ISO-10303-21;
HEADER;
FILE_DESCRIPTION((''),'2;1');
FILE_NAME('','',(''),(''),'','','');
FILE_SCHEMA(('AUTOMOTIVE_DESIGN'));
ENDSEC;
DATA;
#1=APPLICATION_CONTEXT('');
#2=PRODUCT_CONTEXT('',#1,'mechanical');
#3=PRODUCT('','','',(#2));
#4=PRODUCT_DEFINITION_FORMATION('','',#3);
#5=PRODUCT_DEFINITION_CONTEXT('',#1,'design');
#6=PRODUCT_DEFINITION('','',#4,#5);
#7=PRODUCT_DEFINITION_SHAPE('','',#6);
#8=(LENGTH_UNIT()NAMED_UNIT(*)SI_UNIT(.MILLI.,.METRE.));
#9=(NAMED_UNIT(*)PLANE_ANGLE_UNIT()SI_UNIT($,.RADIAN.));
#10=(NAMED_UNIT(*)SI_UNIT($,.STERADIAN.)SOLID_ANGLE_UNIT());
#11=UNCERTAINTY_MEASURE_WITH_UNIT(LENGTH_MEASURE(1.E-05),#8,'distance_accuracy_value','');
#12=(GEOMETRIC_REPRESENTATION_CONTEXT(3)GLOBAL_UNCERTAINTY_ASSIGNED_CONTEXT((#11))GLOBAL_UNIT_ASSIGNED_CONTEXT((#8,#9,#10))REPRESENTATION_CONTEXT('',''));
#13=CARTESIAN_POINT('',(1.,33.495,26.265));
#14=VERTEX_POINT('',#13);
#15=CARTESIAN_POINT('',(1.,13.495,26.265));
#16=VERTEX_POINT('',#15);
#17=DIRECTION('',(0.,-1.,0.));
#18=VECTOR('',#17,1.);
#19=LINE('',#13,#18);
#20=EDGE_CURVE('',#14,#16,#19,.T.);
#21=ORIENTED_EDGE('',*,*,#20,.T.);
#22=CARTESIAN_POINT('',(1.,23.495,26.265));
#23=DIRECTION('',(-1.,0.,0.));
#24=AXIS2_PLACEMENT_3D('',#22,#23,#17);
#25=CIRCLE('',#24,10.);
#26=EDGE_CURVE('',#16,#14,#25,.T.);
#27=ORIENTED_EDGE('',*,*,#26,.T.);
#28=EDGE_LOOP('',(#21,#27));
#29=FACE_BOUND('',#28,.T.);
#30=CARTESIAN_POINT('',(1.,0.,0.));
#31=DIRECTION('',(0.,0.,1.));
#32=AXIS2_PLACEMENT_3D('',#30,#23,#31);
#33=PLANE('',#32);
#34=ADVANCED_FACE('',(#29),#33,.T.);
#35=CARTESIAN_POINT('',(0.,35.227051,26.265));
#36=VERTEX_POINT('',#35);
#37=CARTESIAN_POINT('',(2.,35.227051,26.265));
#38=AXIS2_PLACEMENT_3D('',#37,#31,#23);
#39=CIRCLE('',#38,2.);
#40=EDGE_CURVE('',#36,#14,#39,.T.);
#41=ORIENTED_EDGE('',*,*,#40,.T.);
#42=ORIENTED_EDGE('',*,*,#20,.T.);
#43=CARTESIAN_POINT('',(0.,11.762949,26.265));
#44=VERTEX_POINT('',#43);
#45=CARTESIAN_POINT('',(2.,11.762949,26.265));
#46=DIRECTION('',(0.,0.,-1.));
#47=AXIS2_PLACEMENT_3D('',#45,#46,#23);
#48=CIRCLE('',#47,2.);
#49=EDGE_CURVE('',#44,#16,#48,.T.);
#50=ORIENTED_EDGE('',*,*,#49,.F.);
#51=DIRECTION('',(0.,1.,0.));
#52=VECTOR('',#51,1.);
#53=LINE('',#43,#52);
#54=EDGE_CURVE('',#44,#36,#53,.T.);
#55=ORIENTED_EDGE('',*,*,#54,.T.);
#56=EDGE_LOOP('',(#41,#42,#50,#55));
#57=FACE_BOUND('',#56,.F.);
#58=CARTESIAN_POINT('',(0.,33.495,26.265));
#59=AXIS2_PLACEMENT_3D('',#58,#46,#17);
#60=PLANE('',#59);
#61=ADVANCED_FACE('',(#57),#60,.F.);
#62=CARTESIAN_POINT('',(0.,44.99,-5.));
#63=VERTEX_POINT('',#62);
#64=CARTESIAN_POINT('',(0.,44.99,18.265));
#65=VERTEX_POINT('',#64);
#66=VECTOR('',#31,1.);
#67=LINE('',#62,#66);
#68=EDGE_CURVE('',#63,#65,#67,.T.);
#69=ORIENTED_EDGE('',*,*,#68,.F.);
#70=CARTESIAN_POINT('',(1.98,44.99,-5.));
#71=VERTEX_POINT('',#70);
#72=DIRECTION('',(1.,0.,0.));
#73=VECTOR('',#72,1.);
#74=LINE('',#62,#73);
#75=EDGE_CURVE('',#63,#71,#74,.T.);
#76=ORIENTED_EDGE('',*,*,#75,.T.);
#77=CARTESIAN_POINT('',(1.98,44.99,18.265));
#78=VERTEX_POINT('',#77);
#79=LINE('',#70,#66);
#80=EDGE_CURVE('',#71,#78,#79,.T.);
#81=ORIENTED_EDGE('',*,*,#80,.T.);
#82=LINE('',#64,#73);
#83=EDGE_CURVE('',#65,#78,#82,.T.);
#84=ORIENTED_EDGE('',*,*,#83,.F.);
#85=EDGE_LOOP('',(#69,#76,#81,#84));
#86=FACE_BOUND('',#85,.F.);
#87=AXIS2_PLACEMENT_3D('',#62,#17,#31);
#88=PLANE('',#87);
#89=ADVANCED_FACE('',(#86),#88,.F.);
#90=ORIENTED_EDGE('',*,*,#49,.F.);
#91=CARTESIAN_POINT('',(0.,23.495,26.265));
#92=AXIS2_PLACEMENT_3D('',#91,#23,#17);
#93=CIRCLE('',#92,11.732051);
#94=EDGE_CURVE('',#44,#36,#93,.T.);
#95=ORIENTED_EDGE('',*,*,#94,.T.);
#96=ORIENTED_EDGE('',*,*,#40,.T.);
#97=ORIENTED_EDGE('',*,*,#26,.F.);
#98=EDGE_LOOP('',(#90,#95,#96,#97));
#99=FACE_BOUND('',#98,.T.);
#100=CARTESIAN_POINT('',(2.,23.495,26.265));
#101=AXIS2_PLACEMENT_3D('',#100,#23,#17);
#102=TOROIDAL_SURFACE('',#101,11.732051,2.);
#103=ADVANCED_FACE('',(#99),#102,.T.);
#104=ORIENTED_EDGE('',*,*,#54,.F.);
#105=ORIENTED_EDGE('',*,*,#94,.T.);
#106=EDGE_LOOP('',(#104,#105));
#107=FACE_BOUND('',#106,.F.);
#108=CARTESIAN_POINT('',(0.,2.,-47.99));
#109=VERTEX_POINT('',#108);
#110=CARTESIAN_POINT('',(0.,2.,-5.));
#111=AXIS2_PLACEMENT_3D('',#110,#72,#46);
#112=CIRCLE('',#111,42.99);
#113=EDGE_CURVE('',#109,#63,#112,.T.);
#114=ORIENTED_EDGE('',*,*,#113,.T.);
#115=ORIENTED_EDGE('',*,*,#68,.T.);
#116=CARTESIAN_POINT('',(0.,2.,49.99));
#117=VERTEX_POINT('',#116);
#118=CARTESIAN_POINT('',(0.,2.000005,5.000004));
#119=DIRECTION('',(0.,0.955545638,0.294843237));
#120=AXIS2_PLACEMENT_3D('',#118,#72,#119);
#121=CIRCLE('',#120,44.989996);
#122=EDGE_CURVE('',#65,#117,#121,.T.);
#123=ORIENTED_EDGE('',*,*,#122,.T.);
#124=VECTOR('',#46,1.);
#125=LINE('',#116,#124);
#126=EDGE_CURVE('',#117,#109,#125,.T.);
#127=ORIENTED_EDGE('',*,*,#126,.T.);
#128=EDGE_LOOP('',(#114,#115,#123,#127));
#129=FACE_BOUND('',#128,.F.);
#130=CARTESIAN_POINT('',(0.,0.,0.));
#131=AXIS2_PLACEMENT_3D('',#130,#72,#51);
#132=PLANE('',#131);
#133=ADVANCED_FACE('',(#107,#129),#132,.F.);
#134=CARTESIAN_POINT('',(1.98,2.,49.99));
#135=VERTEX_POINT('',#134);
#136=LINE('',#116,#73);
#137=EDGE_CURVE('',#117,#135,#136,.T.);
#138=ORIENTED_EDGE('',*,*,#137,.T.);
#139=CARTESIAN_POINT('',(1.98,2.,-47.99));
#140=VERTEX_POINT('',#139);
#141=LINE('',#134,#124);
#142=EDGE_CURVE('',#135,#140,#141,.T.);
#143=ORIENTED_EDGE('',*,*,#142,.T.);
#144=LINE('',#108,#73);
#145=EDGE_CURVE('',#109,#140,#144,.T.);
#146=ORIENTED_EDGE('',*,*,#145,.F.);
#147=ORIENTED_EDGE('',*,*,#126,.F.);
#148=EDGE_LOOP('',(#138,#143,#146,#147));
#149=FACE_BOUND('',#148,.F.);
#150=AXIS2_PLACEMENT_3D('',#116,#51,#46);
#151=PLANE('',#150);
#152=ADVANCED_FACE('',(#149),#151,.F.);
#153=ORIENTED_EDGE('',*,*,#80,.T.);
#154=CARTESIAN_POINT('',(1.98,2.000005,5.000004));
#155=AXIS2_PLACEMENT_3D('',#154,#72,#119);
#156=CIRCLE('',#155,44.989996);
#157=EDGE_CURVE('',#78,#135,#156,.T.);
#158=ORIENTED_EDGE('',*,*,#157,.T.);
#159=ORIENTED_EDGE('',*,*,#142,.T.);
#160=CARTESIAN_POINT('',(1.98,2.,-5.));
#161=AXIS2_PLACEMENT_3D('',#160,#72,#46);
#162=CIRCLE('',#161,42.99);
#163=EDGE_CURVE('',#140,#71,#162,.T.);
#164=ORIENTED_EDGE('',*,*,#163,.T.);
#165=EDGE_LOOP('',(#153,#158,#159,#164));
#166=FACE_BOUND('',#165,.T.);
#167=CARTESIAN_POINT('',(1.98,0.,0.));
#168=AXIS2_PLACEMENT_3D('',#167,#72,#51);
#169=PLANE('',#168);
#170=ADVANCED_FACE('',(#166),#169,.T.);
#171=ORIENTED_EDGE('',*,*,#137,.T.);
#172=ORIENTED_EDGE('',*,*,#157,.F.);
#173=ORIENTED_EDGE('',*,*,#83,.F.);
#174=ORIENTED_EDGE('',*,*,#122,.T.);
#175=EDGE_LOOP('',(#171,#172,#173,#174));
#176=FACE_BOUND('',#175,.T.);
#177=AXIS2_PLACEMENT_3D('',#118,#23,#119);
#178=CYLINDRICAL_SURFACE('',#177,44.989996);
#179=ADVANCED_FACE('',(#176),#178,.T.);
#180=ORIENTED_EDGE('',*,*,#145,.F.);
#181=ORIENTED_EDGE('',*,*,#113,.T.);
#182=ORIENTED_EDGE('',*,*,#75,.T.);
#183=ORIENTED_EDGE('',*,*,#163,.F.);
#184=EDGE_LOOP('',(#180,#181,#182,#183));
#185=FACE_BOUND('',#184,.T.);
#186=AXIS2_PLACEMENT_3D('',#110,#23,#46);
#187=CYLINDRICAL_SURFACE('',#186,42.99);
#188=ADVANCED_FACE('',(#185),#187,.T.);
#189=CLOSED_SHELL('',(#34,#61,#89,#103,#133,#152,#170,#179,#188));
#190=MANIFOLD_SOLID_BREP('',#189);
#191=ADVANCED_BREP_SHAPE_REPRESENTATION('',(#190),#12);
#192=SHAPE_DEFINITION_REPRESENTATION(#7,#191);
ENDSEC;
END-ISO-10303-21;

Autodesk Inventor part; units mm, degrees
ref_plane "YZ Plane" through (0, 0, 0) normal (1, 0, 0) x (0, 1, 0)
ref_plane "XZ Plane" through (0, 0, 0) normal (0, 1, 0) x (-1, 0, 0)
ref_plane "XY Plane" through (0, 0, 0) normal (0, 0, 1) x (1, 0, 0)
sketch "Sketch1" plane through (0, 0, 0) normal (1, 0, 0) x (0, 1, 0)
  line L0 (0, 49.99) -> (2, 49.99) construction
  line L1 (2, 49.99) -> (2, -49.99) construction
  line L2 (2, -49.99) -> (0, -49.99) construction
  line L3 (0, 49.99) -> (0, 0) construction
  line L4 (0, 0) -> (0, -49.99) construction
  arc A0 (46.99, 5) -> (2, 49.99) centre (2, 5) ccw construction
  arc A1 (2, -49.99) -> (46.99, -5) centre (2, -5) ccw construction
  line L5 (46.99, 5) -> (46.99, -5) construction
  arc A2 (2, -47.99) -> (44.99, -5) centre (2, -5) ccw construction
  line L6 (44.99, -5) -> (44.99, 5) construction
  arc A3 (44.99, 5) -> (2, 47.99) centre (2, 5) ccw construction
  line L7 (44.99, 5) -> (44.99, 49.99) construction
  dimension "d0" = 99.98
  dimension "d1" = 2
  dimension "d2" = 10
  dimension "d3" = 2
  dimension "d4" = 2
sketch "Sketch2" plane through (0, 0, 0) normal (1, 0, 0) x (0, 1, 0)
  line L0 (0, 49.99) -> (2, 49.99) construction
  line L1 (2, 49.99) -> (2, -49.99) construction
  line L2 (2, -49.99) -> (0, -49.99) construction
  line L3 (0, 49.99) -> (0, 0) construction
  line L4 (0, 0) -> (0, -49.99) construction
  arc A0 (46.99, 5) -> (2, 49.99) centre (2, 5) ccw construction
  arc A1 (2, -49.99) -> (46.99, -5) centre (2, -5) ccw construction
  line L5 (46.99, 5) -> (46.99, -5) construction
  arc A2 (2, -47.99) -> (44.99, -5) centre (2, -5) ccw construction
  line L6 (44.99, -5) -> (44.99, 5) construction
  arc A3 (44.99, 5) -> (2, 47.99) centre (2, 5) ccw construction
  line L7 (44.99, 5) -> (44.99, 49.99) construction
  line L8 (2, 49.99) -> (2, -47.99)
  arc A4 (2, -47.99) -> (44.99, -5) centre (2, -5) ccw
  line L9 (44.99, -5) -> (44.99, 18.265)
  arc A5 (44.99, 18.265) -> (2, 49.99) centre (2, 5) ccw
extrude "Extrusion1" add sketch "Sketch2" along normal blind 1.98
sketch "Sketch3" plane through (0, 0, 0) normal (-1, 0, 0) x (0, 0, 1)
  line L0 (26.265, 33.495) -> (26.265, 13.495)
  arc A0 (26.265, 13.495) -> (26.265, 33.495) centre (26.265, 23.495) ccw
  line L1 (-5, 44.99) -> (18.265, 44.99) projected
  line L2 (18.265, 44.99) -> (18.265, 23.495)
  line L3 (18.265, 23.495) -> (18.265, 2)
  line L4 (49.99, 2) -> (-47.99, 2) projected
  point P0 (0, 0)
  dimension "d7" = 20
  dimension "d8" = 8
extrude "Extrusion2" cut sketch "Sketch3" against normal blind 1
fillet "Fillet1" radius 2 1 edges at (0, 23.495, 36.265)
properties part number "BuddyRobotBaseDoor"
